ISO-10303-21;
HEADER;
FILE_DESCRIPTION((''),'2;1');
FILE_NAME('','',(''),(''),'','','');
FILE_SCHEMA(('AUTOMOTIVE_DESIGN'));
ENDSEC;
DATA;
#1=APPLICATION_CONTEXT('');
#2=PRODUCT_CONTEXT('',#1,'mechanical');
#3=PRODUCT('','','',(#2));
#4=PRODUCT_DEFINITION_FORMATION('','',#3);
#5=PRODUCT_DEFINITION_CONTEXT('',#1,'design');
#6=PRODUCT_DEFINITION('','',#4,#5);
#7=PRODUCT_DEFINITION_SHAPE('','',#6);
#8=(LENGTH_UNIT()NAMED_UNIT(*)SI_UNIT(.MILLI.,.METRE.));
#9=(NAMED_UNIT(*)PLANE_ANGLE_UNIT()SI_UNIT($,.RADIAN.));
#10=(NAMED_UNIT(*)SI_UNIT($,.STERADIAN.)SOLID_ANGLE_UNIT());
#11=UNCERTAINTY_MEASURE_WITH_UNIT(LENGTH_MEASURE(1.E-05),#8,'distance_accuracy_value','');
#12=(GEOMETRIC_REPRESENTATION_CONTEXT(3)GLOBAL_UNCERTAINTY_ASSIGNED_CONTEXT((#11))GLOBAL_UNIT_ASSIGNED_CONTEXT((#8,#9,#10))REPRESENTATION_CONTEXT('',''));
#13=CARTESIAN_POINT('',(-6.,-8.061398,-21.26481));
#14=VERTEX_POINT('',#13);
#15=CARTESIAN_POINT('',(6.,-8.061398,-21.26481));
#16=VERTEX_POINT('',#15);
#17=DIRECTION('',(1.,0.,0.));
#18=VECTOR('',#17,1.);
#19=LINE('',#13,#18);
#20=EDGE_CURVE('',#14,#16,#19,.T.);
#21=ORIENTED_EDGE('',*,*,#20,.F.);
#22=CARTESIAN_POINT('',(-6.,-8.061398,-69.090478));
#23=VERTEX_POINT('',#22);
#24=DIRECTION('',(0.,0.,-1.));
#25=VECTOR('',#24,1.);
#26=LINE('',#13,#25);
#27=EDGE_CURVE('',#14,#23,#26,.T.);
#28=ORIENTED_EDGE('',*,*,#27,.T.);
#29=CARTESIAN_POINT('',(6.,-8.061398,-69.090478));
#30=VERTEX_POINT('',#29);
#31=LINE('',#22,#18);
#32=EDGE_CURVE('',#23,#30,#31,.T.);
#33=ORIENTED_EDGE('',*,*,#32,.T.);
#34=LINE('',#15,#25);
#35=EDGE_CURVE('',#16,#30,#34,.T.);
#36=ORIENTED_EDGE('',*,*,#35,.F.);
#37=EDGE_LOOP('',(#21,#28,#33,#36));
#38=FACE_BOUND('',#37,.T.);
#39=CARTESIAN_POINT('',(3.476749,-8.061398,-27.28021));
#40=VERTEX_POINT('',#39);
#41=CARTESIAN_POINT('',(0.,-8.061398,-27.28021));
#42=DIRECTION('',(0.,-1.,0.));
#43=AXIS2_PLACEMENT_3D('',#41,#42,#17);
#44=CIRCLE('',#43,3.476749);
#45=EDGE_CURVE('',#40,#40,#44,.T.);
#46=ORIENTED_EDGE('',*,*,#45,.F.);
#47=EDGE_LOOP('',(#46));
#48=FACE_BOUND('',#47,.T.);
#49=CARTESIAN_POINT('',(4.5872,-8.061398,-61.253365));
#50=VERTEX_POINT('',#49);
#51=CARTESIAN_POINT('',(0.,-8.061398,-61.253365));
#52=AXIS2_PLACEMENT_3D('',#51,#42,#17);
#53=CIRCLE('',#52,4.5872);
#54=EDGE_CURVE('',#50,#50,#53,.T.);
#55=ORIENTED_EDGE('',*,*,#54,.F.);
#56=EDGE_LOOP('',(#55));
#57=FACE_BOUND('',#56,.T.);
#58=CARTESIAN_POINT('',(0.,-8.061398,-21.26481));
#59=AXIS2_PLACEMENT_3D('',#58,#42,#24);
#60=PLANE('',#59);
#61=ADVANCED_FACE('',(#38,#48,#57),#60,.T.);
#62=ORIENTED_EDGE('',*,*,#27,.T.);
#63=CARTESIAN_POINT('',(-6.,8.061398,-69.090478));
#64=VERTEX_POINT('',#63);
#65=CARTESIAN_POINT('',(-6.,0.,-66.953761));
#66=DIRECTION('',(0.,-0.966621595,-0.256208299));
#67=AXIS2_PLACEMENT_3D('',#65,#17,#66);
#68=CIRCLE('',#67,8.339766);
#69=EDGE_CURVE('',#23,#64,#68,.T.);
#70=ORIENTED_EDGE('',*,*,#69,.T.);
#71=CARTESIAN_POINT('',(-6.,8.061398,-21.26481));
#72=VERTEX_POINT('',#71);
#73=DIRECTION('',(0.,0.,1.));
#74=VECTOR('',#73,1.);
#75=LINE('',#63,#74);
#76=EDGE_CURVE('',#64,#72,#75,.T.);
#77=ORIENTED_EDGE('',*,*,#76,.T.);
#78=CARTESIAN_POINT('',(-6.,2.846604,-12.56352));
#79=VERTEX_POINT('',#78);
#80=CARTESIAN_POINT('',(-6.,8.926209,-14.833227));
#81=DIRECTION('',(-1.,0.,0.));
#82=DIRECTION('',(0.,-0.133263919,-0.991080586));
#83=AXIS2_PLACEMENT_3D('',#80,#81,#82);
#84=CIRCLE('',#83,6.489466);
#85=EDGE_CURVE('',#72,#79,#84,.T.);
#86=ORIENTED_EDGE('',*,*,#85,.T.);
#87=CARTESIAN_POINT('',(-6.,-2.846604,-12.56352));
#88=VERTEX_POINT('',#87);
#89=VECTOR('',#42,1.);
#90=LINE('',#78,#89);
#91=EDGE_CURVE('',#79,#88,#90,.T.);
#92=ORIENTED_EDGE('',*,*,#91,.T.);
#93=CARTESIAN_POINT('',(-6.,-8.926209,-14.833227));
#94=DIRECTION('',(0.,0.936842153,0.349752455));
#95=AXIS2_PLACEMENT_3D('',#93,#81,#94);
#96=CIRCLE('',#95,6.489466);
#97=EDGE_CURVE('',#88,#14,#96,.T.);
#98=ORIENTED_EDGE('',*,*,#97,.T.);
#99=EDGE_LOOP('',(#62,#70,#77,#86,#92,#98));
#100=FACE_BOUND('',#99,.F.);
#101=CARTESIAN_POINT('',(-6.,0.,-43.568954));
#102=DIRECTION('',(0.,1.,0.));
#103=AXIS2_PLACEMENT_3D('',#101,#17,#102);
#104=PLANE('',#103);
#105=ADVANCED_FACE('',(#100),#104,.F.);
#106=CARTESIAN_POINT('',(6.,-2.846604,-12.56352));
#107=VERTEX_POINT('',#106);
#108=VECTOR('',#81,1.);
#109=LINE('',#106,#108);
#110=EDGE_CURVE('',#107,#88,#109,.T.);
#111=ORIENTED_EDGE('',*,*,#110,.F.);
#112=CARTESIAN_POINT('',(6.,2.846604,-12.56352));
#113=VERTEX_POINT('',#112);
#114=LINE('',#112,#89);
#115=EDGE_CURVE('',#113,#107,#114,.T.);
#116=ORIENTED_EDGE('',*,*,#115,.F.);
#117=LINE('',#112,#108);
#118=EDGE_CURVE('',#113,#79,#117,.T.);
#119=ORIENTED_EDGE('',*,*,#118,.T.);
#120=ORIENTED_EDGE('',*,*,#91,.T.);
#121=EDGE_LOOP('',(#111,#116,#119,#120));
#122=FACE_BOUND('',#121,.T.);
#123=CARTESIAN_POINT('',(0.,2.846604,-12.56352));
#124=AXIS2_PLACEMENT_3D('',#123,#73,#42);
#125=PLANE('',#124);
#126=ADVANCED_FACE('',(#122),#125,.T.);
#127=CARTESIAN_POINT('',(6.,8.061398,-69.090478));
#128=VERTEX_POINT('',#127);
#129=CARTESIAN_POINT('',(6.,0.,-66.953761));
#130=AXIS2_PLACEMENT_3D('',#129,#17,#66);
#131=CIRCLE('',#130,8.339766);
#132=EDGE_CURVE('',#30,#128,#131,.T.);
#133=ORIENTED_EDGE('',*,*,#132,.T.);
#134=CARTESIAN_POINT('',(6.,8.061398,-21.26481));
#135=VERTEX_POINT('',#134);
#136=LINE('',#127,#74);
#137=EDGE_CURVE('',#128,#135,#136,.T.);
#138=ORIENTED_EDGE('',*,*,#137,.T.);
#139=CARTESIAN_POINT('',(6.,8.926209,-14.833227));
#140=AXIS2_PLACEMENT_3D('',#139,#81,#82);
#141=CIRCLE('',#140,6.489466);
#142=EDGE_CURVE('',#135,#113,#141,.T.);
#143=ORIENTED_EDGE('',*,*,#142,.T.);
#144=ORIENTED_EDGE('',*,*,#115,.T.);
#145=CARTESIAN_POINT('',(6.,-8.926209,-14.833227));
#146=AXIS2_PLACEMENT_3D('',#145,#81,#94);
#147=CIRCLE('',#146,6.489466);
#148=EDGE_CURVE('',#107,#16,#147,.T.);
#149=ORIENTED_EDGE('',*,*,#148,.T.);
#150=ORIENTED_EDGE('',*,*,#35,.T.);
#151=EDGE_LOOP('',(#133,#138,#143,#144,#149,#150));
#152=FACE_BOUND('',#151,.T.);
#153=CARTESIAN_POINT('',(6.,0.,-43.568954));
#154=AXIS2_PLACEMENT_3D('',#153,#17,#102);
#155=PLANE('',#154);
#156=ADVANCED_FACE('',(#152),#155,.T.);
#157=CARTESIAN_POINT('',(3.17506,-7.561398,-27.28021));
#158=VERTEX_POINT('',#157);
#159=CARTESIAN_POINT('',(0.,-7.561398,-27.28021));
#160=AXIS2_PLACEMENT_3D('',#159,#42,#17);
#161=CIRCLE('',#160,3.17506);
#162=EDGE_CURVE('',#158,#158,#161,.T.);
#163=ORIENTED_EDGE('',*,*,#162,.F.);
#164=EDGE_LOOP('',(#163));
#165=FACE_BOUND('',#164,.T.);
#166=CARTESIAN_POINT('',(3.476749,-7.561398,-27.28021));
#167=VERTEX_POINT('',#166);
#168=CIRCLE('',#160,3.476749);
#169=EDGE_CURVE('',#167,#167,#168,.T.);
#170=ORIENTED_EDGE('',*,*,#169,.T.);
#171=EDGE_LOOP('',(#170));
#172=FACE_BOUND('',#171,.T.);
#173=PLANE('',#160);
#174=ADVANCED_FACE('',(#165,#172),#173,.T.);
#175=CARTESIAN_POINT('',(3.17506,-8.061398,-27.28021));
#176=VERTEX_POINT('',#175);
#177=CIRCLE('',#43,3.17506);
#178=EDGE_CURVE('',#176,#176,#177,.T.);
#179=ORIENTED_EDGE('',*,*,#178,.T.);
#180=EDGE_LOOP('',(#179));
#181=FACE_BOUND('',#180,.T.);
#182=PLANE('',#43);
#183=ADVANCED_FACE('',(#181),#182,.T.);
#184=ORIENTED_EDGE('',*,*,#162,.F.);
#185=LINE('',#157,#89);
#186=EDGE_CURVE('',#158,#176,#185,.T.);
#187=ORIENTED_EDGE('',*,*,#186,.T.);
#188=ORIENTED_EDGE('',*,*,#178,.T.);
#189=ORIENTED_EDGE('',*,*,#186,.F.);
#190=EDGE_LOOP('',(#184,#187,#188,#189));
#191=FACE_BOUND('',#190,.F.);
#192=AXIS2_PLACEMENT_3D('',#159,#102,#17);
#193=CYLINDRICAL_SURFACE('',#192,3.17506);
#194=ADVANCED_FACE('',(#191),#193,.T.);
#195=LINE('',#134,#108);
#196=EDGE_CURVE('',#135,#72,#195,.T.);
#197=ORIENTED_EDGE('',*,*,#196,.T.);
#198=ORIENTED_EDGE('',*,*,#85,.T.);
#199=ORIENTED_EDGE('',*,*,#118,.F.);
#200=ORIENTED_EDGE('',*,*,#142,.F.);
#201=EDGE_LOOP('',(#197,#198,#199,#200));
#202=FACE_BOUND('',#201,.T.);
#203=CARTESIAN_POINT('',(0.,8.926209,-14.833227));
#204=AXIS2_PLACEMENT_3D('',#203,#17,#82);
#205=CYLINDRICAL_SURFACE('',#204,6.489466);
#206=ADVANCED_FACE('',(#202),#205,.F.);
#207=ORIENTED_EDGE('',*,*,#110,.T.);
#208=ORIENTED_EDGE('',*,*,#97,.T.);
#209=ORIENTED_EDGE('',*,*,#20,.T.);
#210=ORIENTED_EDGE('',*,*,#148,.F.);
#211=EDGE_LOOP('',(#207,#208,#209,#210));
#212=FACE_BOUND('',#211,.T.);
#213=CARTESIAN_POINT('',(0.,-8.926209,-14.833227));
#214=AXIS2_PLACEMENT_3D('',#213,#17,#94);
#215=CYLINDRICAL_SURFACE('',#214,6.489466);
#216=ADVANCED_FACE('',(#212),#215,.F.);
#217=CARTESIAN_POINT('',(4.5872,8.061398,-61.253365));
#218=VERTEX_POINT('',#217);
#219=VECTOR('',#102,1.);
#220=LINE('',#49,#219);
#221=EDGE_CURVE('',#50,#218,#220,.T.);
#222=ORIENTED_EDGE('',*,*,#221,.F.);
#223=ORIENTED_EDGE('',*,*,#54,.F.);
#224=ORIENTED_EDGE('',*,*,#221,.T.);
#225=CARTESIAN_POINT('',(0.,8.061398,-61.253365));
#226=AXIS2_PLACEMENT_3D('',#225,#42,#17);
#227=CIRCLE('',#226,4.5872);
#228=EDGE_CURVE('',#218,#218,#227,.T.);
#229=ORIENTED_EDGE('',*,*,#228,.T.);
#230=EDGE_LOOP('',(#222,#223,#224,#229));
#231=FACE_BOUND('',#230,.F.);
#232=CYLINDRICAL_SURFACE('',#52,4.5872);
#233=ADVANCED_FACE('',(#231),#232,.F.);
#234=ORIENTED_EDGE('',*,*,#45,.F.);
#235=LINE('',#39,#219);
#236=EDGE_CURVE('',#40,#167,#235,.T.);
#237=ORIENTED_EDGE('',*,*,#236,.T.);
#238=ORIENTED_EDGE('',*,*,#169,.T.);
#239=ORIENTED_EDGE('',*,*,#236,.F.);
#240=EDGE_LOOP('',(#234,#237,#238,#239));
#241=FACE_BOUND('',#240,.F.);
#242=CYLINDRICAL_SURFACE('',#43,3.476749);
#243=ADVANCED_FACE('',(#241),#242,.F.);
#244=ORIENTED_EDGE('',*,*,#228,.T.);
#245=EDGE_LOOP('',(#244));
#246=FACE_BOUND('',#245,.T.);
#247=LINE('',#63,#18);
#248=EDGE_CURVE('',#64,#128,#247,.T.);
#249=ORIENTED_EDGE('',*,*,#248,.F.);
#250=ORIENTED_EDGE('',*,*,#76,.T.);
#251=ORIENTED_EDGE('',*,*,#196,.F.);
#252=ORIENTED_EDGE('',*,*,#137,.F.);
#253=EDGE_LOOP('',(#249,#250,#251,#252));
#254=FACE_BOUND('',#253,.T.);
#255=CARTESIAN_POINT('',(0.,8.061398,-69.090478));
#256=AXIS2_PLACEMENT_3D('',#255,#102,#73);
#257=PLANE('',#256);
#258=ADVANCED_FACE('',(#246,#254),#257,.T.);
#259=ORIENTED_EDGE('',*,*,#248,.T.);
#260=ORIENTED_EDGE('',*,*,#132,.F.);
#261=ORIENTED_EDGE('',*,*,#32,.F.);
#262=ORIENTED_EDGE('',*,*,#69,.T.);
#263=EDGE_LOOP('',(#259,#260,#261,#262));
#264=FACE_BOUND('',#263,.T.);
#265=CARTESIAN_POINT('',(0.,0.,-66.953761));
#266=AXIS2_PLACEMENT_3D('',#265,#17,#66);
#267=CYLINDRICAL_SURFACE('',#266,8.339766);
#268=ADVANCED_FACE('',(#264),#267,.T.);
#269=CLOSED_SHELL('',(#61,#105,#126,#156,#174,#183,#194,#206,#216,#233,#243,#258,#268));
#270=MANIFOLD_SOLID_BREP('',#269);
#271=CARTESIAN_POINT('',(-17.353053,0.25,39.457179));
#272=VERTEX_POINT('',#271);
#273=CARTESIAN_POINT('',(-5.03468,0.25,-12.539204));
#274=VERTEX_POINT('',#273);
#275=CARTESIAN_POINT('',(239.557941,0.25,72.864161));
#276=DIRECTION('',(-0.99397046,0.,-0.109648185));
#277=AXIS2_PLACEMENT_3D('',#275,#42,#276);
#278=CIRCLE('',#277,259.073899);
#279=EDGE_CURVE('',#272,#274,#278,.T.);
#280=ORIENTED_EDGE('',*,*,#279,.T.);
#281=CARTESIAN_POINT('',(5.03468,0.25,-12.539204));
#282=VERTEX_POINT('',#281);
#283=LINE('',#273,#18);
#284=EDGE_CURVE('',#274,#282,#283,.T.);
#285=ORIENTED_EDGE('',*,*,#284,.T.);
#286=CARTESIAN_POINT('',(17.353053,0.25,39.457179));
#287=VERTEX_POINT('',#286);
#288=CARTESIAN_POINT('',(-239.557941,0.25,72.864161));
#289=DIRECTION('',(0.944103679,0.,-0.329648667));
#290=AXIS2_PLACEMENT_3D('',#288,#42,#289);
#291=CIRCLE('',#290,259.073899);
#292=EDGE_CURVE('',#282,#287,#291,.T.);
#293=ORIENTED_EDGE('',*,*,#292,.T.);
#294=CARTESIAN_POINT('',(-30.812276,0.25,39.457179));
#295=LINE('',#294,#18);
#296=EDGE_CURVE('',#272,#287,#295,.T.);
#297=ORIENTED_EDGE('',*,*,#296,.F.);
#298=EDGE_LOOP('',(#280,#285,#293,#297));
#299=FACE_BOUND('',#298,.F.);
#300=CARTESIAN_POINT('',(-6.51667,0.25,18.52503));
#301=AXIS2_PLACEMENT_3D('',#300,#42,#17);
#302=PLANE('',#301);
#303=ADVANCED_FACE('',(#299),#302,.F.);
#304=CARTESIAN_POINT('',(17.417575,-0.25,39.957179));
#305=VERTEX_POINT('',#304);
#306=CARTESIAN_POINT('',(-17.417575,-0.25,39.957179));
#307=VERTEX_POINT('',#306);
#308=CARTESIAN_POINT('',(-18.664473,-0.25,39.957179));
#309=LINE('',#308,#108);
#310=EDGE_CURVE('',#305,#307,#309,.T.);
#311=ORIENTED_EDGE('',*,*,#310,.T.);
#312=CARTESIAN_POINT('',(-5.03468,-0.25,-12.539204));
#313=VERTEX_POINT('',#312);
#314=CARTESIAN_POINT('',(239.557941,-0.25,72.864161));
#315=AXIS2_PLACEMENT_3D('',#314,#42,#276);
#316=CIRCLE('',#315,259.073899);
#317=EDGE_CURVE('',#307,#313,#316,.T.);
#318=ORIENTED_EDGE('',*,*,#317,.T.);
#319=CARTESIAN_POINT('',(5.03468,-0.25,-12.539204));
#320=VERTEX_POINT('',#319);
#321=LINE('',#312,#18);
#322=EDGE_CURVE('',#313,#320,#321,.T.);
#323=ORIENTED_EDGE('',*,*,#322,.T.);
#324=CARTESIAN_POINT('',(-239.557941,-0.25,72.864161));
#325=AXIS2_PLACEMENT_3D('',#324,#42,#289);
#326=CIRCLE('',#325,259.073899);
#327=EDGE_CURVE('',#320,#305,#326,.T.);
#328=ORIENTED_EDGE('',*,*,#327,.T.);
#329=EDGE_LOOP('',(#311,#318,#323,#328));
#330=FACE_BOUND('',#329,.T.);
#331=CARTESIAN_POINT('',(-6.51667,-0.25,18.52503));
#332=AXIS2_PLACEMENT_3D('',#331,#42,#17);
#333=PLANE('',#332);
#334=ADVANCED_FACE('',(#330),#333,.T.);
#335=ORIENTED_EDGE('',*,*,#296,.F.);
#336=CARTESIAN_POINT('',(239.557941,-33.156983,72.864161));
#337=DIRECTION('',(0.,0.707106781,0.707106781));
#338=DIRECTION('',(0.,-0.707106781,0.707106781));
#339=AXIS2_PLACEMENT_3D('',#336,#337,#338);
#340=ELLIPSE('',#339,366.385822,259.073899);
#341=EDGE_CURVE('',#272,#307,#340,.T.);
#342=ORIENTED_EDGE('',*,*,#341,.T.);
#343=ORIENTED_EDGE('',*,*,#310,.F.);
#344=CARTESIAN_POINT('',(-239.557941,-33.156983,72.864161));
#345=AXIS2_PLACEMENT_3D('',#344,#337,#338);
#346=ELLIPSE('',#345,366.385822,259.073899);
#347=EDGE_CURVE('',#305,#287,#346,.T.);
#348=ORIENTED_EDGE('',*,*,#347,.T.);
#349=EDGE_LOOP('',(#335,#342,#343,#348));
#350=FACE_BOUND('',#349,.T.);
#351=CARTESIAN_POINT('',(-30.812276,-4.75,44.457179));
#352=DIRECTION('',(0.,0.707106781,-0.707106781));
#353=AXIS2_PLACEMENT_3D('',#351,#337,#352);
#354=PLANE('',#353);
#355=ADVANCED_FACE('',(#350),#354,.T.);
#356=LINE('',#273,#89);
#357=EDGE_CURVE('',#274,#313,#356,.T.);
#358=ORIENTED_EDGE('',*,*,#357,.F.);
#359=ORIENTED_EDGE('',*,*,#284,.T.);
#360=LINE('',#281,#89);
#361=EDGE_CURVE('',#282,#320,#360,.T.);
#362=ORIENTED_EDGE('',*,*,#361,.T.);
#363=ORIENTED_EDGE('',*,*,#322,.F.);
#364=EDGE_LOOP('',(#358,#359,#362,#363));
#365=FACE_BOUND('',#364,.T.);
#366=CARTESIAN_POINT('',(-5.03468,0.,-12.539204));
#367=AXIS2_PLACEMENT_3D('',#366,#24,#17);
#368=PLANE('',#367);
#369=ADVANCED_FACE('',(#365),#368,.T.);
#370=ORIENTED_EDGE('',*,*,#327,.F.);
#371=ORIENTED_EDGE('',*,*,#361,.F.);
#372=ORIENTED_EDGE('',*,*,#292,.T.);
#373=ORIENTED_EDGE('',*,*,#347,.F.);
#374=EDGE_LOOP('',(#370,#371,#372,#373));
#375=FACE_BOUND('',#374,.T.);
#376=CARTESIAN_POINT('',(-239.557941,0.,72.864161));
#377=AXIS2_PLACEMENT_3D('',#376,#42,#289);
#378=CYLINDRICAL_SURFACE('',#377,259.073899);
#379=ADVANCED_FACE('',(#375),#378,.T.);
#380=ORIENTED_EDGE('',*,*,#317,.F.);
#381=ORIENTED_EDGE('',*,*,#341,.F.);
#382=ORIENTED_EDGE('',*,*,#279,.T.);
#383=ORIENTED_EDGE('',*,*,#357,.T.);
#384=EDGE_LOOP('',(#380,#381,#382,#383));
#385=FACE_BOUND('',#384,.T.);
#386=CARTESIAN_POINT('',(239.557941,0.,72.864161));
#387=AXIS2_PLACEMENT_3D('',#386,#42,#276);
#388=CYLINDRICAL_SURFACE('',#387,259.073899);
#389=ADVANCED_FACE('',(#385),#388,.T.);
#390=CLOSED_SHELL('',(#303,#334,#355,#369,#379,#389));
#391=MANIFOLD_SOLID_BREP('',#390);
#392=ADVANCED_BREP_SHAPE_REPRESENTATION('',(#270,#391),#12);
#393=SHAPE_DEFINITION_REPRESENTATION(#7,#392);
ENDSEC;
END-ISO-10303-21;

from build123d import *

# Parameters (mm, degrees)
F1_DEPTH    = 0.25
F3_DEPTH    = 6
F4_R        = 4.587200225
F5_DEPTH    = 17
F6_T1_DEPTH = 61.6245528892
F7_R        = 3.4767492544
F8_DEPTH    = 0.5
F9_R        = 3.1750599708
F10_DEPTH   = 0.5
F11_DEPTH   = 0.5


# Not quite as in the source:
# - a fillet or chamfer that OpenCascade refuses, or shapes differently, is made with other operations: its cross-section is extruded or revolved along the edge and cut away or added


with BuildPart() as f1:
    # F0 (on Front) → F1 (new body, symmetric)
    with BuildSketch(Plane.XZ):
        with BuildLine():
            Line((0, 44.4571785629), (-17.9538615048, 44.4571785629))
            ThreePointArc((-17.9538615048, 44.4571785629), (-13.1065795403, 15.5935304797), (-5.0346800126, -12.53920421))
            Line((-5.0346800126, -12.53920421), (0, -12.53920421))
            Line((0, -12.53920421), (0, 44.4571785629))
        make_face()
        with BuildLine():
            Line((17.9538615048, 44.4571785629), (0, 44.4571785629))
            Line((0, 44.4571785629), (0, -12.53920421))
            Line((0, -12.53920421), (5.0346800126, -12.53920421))
            ThreePointArc((5.0346800126, -12.53920421), (13.1065795403, 15.5935304797), (17.9538615048, 44.4571785629))
        make_face()
    extrude(amount=F1_DEPTH, both=True)

    # F6: chamfer of 5 on 1 edges, made by hand

    # F6_s2 → F6_t1 (cut)
    with BuildSketch(Plane.YZ.offset(-30.8122764446)):
        Polygon((-4.75, 44.4571785629), (0.25, 39.4571785629), (0.25, 44.4571785629), align=None)
    extrude(amount=F6_T1_DEPTH, mode=Mode.SUBTRACT)


with BuildPart() as f3:
    # F2 (on Right) → F3 (new body, symmetric)
    with BuildSketch(Plane.YZ):
        with BuildLine():
            Line((0, -12.5635201111), (-2.8466044459, -12.5635201111))
            ThreePointArc((-2.8466044459, -12.5635201111), (-3.3598513481, -18.1692156195), (-8.0613978207, -21.2648101151))
            Line((-8.0613978207, -21.2648101151), (-8.0613978207, -69.0904781222))
            ThreePointArc((-8.0613978207, -69.0904781222), (0, -75.2935267917), (8.0613978207, -69.0904781222))
            Line((8.0613978207, -69.0904781222), (8.0613978207, -21.2648101151))
            ThreePointArc((8.0613978207, -21.2648101151), (3.3598513481, -18.1692156195), (2.8466044459, -12.5635201111))
            Line((2.8466044459, -12.5635201111), (0, -12.5635201111))
        make_face()
    extrude(amount=F3_DEPTH, both=True)

    # F4 (on face) → F5 (cut)
    with BuildSketch(Plane.XZ.offset(8.0613978207)):
        with Locations((0, -61.2533651292)):
            Circle(F4_R)
    extrude(amount=-F5_DEPTH, mode=Mode.SUBTRACT)

    # F7 (on face) → F8 (cut)
    with BuildSketch(Plane.XZ.offset(8.0613978207)):
        with Locations((0, -27.280209586)):
            Circle(F7_R)
    extrude(amount=-F8_DEPTH, mode=Mode.SUBTRACT)

    # F9 (on face) → F10 (join)
    with BuildSketch(Plane.XZ.offset(7.5613978207)):
        with Locations((0, -27.280209586)):
            Circle(F9_R)
    extrude(amount=F10_DEPTH)

    # F9 (on face) → F11 (join)
    with BuildSketch(Plane.XZ.offset(7.5613978207)):
        with Locations((0, -27.280209586)):
            Circle(F9_R)
    extrude(amount=F11_DEPTH)


solid = Compound([f1.part, f3.part])
